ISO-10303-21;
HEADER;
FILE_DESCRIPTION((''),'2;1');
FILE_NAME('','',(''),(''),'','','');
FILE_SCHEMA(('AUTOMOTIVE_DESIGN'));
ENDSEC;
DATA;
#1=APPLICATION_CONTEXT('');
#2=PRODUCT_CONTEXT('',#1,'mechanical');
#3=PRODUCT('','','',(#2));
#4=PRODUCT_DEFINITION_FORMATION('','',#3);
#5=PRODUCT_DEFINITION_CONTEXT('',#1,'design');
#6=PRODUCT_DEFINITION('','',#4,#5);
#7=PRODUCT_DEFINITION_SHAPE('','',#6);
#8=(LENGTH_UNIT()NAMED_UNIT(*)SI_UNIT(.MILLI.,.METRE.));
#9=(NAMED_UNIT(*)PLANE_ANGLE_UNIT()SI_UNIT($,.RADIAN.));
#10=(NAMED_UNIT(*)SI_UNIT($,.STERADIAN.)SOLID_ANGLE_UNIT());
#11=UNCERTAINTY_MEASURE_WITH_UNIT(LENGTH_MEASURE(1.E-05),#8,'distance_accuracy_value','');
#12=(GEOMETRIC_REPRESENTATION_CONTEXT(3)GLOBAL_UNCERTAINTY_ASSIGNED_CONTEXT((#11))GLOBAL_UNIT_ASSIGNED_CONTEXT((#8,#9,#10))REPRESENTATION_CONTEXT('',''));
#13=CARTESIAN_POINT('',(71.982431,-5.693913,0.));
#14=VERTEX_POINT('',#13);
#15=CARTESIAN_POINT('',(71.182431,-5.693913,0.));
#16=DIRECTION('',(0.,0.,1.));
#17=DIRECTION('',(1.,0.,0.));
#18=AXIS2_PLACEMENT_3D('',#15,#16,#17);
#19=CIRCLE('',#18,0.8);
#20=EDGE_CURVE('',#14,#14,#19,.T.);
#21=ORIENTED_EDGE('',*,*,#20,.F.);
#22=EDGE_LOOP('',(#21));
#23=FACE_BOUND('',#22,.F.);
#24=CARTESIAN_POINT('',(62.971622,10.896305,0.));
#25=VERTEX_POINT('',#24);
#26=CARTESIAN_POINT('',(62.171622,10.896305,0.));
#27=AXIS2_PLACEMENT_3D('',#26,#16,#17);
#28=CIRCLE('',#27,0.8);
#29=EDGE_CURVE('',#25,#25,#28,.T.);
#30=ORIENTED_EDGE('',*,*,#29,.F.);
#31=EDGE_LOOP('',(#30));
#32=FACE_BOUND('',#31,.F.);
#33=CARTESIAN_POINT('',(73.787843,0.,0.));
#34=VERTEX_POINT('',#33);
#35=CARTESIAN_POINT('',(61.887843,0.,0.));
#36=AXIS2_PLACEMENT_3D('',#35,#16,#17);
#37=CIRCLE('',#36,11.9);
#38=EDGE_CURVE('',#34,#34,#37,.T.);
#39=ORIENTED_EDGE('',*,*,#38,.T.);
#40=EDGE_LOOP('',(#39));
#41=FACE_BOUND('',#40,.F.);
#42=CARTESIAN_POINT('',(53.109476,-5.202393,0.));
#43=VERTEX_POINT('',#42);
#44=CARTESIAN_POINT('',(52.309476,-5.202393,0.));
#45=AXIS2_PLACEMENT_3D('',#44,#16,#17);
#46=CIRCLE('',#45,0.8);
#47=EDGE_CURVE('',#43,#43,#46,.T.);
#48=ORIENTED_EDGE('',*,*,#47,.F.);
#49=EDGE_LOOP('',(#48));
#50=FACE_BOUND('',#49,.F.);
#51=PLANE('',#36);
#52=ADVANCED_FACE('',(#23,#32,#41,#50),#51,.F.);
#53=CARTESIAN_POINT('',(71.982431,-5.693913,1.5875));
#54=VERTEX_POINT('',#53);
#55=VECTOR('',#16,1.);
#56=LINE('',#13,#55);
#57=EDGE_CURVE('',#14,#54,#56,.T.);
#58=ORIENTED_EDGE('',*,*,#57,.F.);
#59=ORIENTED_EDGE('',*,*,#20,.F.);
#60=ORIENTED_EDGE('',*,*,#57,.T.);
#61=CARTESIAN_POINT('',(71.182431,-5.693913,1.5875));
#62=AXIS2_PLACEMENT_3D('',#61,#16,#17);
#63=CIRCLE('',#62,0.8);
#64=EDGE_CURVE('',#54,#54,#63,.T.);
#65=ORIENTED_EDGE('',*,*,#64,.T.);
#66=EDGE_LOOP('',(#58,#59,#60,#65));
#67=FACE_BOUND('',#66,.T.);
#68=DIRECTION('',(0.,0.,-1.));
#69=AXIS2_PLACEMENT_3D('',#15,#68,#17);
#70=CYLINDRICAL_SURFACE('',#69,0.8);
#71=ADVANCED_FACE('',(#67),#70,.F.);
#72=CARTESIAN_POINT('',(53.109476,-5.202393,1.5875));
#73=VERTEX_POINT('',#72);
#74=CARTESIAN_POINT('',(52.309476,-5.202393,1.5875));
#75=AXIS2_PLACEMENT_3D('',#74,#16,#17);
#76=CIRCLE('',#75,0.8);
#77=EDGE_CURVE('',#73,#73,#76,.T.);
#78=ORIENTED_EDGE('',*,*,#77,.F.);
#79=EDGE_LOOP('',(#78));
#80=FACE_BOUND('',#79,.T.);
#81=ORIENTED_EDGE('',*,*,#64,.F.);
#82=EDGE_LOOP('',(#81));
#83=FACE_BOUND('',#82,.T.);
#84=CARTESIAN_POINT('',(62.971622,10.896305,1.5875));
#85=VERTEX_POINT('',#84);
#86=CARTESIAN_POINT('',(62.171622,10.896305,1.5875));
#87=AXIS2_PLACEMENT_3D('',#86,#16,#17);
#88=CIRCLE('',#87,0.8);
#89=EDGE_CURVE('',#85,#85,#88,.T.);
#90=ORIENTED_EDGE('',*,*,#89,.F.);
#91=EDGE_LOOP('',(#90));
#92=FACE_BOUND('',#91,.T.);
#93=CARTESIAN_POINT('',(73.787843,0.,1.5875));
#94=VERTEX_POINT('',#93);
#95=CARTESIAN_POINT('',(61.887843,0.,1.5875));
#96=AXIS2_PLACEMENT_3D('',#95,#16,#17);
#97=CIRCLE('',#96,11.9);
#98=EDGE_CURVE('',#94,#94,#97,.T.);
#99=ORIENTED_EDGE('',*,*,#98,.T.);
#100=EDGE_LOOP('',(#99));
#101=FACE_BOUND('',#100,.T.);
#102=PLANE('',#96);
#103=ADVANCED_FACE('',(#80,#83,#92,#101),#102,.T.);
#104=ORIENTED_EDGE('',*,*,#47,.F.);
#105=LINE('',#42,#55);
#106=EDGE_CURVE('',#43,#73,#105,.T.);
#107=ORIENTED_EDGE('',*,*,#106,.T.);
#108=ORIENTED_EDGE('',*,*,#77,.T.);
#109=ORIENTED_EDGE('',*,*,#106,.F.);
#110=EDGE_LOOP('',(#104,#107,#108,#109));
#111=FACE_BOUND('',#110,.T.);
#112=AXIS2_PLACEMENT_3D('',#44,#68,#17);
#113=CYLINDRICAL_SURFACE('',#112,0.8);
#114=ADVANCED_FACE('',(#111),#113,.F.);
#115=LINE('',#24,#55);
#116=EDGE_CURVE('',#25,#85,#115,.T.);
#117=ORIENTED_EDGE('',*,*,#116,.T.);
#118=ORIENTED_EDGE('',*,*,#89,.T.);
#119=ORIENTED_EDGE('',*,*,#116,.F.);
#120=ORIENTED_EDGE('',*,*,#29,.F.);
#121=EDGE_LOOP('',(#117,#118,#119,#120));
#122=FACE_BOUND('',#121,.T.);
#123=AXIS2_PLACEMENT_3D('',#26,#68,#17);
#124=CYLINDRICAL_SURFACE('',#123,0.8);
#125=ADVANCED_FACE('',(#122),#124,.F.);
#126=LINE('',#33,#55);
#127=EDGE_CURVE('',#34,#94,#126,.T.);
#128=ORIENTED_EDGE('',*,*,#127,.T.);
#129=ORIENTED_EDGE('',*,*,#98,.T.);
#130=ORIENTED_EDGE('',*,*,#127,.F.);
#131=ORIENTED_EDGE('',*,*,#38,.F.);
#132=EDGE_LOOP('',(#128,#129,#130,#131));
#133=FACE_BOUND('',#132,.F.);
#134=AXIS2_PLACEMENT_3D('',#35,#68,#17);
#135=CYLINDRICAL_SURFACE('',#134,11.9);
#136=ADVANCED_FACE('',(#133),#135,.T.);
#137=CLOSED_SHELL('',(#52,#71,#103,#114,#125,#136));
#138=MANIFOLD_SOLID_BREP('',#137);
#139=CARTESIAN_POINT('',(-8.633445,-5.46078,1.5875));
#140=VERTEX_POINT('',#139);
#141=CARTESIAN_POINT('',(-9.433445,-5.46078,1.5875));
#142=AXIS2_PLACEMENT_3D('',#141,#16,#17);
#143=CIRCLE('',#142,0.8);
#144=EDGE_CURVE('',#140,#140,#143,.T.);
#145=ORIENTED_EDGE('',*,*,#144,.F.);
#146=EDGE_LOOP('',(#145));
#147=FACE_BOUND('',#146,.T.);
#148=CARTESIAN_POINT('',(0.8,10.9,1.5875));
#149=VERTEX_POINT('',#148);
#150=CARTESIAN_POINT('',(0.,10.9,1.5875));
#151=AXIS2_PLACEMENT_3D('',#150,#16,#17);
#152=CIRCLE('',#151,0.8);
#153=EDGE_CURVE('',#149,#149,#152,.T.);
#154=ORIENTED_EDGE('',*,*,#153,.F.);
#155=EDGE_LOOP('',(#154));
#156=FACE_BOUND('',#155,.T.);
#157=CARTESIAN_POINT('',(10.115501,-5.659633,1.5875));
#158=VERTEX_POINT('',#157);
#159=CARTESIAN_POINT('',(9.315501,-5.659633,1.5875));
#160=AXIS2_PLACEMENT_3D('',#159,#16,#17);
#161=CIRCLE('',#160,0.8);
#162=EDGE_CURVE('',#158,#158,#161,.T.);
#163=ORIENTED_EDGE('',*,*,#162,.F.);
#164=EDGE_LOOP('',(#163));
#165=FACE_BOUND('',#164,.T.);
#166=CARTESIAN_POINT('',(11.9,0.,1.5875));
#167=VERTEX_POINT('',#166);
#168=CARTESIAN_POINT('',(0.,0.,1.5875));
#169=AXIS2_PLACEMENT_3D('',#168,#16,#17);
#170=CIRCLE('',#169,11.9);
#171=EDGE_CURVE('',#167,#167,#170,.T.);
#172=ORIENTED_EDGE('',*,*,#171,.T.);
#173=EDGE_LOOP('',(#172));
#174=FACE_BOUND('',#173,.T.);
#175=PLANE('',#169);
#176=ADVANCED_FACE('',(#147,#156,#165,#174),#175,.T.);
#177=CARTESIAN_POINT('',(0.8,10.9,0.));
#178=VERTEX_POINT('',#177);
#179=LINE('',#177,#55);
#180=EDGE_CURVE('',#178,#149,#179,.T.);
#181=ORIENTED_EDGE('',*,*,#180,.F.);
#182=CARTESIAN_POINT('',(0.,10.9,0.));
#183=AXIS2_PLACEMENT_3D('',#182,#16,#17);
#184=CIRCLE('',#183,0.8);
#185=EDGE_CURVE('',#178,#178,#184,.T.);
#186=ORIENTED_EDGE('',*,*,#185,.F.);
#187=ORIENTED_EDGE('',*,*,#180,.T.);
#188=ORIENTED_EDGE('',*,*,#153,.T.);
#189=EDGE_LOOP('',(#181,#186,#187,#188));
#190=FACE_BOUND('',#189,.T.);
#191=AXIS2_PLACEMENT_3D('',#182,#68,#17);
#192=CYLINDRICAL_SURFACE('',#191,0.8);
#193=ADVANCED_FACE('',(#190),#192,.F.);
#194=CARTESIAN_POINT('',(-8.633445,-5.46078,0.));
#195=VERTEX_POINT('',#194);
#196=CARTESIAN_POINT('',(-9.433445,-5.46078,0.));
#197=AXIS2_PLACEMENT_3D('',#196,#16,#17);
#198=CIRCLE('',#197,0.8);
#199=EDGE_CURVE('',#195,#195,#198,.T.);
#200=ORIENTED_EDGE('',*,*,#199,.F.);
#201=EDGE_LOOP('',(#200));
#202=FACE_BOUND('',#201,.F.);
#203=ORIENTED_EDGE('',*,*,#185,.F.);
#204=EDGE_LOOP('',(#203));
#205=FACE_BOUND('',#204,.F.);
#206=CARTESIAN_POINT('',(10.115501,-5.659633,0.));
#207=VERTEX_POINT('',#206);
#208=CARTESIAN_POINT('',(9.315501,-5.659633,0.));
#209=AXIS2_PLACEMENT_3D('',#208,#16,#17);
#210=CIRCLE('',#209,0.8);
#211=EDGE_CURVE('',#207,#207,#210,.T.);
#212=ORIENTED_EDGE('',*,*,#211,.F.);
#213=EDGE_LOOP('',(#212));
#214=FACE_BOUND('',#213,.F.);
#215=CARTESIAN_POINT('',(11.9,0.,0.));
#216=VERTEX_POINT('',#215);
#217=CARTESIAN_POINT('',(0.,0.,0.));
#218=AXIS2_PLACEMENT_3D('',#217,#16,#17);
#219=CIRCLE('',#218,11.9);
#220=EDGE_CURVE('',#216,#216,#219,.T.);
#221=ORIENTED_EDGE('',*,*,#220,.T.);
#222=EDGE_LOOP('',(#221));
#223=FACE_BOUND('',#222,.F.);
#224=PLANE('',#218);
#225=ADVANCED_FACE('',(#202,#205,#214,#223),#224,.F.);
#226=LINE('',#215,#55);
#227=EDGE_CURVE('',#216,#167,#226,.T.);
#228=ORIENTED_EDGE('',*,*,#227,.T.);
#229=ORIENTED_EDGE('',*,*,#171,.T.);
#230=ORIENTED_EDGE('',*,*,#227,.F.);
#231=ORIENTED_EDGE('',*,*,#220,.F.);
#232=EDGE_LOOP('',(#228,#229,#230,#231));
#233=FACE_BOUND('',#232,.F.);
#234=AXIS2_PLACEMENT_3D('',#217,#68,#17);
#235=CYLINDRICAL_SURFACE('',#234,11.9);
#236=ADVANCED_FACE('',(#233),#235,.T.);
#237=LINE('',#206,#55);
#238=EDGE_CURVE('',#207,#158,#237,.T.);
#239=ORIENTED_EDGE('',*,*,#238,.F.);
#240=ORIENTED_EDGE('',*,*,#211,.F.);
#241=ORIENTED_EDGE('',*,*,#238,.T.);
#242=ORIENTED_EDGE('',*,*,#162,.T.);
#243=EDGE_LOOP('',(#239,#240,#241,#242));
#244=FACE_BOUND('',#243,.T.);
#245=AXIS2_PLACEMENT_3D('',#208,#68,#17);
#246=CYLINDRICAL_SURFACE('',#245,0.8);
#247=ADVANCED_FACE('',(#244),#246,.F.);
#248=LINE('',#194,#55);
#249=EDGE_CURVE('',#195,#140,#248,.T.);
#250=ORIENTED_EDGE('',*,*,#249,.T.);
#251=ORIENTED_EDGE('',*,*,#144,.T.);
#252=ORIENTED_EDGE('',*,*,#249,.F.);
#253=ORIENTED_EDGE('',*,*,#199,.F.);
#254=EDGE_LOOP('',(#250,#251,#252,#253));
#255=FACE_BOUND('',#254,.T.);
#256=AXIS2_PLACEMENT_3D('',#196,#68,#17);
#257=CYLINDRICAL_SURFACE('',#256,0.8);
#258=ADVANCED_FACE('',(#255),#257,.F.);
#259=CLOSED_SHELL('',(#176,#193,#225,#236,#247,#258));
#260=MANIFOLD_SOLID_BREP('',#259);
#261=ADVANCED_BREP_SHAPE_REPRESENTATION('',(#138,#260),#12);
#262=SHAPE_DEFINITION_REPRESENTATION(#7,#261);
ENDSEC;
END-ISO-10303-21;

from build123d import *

# Parameters (mm, degrees)
F0_R     = 11.9
F0_R_2   = 0.8
F1_DEPTH = 1.5875
F2_R     = 11.9
F2_R_2   = 0.8
F3_DEPTH = 1.5875


# Not quite as in the source:
# - a length typed as a fraction of an inch, garbled in the dataset ("3 / 203.2 mm" for 3/8 in), is restored


with BuildPart() as f1:
    # F0 (on Top) → F1 (new body)
    with BuildSketch(Plane.XY):
        Circle(F0_R)
        with Locations((-9.4334447669, -5.4607801485)):
            Circle(F0_R_2, mode=Mode.SUBTRACT)
        with Locations((9.3155007377, -5.6596330275)):
            Circle(F0_R_2, mode=Mode.SUBTRACT)
        with Locations((0, 10.9)):
            Circle(F0_R_2, mode=Mode.SUBTRACT)
    extrude(amount=F1_DEPTH)


with BuildPart() as f3:
    # F2 (on Top) → F3 (new body)
    with BuildSketch(Plane.XY):
        with Locations((61.8878431498, 0)):
            Circle(F2_R)
        with Locations((52.3094763812, -5.2023927231)):
            Circle(F2_R_2, mode=Mode.SUBTRACT)
        with Locations((71.1824307928, -5.6939125869)):
            Circle(F2_R_2, mode=Mode.SUBTRACT)
        with Locations((62.1716222755, 10.89630531)):
            Circle(F2_R_2, mode=Mode.SUBTRACT)
    extrude(amount=F3_DEPTH)


solid = Compound([f1.part, f3.part])
